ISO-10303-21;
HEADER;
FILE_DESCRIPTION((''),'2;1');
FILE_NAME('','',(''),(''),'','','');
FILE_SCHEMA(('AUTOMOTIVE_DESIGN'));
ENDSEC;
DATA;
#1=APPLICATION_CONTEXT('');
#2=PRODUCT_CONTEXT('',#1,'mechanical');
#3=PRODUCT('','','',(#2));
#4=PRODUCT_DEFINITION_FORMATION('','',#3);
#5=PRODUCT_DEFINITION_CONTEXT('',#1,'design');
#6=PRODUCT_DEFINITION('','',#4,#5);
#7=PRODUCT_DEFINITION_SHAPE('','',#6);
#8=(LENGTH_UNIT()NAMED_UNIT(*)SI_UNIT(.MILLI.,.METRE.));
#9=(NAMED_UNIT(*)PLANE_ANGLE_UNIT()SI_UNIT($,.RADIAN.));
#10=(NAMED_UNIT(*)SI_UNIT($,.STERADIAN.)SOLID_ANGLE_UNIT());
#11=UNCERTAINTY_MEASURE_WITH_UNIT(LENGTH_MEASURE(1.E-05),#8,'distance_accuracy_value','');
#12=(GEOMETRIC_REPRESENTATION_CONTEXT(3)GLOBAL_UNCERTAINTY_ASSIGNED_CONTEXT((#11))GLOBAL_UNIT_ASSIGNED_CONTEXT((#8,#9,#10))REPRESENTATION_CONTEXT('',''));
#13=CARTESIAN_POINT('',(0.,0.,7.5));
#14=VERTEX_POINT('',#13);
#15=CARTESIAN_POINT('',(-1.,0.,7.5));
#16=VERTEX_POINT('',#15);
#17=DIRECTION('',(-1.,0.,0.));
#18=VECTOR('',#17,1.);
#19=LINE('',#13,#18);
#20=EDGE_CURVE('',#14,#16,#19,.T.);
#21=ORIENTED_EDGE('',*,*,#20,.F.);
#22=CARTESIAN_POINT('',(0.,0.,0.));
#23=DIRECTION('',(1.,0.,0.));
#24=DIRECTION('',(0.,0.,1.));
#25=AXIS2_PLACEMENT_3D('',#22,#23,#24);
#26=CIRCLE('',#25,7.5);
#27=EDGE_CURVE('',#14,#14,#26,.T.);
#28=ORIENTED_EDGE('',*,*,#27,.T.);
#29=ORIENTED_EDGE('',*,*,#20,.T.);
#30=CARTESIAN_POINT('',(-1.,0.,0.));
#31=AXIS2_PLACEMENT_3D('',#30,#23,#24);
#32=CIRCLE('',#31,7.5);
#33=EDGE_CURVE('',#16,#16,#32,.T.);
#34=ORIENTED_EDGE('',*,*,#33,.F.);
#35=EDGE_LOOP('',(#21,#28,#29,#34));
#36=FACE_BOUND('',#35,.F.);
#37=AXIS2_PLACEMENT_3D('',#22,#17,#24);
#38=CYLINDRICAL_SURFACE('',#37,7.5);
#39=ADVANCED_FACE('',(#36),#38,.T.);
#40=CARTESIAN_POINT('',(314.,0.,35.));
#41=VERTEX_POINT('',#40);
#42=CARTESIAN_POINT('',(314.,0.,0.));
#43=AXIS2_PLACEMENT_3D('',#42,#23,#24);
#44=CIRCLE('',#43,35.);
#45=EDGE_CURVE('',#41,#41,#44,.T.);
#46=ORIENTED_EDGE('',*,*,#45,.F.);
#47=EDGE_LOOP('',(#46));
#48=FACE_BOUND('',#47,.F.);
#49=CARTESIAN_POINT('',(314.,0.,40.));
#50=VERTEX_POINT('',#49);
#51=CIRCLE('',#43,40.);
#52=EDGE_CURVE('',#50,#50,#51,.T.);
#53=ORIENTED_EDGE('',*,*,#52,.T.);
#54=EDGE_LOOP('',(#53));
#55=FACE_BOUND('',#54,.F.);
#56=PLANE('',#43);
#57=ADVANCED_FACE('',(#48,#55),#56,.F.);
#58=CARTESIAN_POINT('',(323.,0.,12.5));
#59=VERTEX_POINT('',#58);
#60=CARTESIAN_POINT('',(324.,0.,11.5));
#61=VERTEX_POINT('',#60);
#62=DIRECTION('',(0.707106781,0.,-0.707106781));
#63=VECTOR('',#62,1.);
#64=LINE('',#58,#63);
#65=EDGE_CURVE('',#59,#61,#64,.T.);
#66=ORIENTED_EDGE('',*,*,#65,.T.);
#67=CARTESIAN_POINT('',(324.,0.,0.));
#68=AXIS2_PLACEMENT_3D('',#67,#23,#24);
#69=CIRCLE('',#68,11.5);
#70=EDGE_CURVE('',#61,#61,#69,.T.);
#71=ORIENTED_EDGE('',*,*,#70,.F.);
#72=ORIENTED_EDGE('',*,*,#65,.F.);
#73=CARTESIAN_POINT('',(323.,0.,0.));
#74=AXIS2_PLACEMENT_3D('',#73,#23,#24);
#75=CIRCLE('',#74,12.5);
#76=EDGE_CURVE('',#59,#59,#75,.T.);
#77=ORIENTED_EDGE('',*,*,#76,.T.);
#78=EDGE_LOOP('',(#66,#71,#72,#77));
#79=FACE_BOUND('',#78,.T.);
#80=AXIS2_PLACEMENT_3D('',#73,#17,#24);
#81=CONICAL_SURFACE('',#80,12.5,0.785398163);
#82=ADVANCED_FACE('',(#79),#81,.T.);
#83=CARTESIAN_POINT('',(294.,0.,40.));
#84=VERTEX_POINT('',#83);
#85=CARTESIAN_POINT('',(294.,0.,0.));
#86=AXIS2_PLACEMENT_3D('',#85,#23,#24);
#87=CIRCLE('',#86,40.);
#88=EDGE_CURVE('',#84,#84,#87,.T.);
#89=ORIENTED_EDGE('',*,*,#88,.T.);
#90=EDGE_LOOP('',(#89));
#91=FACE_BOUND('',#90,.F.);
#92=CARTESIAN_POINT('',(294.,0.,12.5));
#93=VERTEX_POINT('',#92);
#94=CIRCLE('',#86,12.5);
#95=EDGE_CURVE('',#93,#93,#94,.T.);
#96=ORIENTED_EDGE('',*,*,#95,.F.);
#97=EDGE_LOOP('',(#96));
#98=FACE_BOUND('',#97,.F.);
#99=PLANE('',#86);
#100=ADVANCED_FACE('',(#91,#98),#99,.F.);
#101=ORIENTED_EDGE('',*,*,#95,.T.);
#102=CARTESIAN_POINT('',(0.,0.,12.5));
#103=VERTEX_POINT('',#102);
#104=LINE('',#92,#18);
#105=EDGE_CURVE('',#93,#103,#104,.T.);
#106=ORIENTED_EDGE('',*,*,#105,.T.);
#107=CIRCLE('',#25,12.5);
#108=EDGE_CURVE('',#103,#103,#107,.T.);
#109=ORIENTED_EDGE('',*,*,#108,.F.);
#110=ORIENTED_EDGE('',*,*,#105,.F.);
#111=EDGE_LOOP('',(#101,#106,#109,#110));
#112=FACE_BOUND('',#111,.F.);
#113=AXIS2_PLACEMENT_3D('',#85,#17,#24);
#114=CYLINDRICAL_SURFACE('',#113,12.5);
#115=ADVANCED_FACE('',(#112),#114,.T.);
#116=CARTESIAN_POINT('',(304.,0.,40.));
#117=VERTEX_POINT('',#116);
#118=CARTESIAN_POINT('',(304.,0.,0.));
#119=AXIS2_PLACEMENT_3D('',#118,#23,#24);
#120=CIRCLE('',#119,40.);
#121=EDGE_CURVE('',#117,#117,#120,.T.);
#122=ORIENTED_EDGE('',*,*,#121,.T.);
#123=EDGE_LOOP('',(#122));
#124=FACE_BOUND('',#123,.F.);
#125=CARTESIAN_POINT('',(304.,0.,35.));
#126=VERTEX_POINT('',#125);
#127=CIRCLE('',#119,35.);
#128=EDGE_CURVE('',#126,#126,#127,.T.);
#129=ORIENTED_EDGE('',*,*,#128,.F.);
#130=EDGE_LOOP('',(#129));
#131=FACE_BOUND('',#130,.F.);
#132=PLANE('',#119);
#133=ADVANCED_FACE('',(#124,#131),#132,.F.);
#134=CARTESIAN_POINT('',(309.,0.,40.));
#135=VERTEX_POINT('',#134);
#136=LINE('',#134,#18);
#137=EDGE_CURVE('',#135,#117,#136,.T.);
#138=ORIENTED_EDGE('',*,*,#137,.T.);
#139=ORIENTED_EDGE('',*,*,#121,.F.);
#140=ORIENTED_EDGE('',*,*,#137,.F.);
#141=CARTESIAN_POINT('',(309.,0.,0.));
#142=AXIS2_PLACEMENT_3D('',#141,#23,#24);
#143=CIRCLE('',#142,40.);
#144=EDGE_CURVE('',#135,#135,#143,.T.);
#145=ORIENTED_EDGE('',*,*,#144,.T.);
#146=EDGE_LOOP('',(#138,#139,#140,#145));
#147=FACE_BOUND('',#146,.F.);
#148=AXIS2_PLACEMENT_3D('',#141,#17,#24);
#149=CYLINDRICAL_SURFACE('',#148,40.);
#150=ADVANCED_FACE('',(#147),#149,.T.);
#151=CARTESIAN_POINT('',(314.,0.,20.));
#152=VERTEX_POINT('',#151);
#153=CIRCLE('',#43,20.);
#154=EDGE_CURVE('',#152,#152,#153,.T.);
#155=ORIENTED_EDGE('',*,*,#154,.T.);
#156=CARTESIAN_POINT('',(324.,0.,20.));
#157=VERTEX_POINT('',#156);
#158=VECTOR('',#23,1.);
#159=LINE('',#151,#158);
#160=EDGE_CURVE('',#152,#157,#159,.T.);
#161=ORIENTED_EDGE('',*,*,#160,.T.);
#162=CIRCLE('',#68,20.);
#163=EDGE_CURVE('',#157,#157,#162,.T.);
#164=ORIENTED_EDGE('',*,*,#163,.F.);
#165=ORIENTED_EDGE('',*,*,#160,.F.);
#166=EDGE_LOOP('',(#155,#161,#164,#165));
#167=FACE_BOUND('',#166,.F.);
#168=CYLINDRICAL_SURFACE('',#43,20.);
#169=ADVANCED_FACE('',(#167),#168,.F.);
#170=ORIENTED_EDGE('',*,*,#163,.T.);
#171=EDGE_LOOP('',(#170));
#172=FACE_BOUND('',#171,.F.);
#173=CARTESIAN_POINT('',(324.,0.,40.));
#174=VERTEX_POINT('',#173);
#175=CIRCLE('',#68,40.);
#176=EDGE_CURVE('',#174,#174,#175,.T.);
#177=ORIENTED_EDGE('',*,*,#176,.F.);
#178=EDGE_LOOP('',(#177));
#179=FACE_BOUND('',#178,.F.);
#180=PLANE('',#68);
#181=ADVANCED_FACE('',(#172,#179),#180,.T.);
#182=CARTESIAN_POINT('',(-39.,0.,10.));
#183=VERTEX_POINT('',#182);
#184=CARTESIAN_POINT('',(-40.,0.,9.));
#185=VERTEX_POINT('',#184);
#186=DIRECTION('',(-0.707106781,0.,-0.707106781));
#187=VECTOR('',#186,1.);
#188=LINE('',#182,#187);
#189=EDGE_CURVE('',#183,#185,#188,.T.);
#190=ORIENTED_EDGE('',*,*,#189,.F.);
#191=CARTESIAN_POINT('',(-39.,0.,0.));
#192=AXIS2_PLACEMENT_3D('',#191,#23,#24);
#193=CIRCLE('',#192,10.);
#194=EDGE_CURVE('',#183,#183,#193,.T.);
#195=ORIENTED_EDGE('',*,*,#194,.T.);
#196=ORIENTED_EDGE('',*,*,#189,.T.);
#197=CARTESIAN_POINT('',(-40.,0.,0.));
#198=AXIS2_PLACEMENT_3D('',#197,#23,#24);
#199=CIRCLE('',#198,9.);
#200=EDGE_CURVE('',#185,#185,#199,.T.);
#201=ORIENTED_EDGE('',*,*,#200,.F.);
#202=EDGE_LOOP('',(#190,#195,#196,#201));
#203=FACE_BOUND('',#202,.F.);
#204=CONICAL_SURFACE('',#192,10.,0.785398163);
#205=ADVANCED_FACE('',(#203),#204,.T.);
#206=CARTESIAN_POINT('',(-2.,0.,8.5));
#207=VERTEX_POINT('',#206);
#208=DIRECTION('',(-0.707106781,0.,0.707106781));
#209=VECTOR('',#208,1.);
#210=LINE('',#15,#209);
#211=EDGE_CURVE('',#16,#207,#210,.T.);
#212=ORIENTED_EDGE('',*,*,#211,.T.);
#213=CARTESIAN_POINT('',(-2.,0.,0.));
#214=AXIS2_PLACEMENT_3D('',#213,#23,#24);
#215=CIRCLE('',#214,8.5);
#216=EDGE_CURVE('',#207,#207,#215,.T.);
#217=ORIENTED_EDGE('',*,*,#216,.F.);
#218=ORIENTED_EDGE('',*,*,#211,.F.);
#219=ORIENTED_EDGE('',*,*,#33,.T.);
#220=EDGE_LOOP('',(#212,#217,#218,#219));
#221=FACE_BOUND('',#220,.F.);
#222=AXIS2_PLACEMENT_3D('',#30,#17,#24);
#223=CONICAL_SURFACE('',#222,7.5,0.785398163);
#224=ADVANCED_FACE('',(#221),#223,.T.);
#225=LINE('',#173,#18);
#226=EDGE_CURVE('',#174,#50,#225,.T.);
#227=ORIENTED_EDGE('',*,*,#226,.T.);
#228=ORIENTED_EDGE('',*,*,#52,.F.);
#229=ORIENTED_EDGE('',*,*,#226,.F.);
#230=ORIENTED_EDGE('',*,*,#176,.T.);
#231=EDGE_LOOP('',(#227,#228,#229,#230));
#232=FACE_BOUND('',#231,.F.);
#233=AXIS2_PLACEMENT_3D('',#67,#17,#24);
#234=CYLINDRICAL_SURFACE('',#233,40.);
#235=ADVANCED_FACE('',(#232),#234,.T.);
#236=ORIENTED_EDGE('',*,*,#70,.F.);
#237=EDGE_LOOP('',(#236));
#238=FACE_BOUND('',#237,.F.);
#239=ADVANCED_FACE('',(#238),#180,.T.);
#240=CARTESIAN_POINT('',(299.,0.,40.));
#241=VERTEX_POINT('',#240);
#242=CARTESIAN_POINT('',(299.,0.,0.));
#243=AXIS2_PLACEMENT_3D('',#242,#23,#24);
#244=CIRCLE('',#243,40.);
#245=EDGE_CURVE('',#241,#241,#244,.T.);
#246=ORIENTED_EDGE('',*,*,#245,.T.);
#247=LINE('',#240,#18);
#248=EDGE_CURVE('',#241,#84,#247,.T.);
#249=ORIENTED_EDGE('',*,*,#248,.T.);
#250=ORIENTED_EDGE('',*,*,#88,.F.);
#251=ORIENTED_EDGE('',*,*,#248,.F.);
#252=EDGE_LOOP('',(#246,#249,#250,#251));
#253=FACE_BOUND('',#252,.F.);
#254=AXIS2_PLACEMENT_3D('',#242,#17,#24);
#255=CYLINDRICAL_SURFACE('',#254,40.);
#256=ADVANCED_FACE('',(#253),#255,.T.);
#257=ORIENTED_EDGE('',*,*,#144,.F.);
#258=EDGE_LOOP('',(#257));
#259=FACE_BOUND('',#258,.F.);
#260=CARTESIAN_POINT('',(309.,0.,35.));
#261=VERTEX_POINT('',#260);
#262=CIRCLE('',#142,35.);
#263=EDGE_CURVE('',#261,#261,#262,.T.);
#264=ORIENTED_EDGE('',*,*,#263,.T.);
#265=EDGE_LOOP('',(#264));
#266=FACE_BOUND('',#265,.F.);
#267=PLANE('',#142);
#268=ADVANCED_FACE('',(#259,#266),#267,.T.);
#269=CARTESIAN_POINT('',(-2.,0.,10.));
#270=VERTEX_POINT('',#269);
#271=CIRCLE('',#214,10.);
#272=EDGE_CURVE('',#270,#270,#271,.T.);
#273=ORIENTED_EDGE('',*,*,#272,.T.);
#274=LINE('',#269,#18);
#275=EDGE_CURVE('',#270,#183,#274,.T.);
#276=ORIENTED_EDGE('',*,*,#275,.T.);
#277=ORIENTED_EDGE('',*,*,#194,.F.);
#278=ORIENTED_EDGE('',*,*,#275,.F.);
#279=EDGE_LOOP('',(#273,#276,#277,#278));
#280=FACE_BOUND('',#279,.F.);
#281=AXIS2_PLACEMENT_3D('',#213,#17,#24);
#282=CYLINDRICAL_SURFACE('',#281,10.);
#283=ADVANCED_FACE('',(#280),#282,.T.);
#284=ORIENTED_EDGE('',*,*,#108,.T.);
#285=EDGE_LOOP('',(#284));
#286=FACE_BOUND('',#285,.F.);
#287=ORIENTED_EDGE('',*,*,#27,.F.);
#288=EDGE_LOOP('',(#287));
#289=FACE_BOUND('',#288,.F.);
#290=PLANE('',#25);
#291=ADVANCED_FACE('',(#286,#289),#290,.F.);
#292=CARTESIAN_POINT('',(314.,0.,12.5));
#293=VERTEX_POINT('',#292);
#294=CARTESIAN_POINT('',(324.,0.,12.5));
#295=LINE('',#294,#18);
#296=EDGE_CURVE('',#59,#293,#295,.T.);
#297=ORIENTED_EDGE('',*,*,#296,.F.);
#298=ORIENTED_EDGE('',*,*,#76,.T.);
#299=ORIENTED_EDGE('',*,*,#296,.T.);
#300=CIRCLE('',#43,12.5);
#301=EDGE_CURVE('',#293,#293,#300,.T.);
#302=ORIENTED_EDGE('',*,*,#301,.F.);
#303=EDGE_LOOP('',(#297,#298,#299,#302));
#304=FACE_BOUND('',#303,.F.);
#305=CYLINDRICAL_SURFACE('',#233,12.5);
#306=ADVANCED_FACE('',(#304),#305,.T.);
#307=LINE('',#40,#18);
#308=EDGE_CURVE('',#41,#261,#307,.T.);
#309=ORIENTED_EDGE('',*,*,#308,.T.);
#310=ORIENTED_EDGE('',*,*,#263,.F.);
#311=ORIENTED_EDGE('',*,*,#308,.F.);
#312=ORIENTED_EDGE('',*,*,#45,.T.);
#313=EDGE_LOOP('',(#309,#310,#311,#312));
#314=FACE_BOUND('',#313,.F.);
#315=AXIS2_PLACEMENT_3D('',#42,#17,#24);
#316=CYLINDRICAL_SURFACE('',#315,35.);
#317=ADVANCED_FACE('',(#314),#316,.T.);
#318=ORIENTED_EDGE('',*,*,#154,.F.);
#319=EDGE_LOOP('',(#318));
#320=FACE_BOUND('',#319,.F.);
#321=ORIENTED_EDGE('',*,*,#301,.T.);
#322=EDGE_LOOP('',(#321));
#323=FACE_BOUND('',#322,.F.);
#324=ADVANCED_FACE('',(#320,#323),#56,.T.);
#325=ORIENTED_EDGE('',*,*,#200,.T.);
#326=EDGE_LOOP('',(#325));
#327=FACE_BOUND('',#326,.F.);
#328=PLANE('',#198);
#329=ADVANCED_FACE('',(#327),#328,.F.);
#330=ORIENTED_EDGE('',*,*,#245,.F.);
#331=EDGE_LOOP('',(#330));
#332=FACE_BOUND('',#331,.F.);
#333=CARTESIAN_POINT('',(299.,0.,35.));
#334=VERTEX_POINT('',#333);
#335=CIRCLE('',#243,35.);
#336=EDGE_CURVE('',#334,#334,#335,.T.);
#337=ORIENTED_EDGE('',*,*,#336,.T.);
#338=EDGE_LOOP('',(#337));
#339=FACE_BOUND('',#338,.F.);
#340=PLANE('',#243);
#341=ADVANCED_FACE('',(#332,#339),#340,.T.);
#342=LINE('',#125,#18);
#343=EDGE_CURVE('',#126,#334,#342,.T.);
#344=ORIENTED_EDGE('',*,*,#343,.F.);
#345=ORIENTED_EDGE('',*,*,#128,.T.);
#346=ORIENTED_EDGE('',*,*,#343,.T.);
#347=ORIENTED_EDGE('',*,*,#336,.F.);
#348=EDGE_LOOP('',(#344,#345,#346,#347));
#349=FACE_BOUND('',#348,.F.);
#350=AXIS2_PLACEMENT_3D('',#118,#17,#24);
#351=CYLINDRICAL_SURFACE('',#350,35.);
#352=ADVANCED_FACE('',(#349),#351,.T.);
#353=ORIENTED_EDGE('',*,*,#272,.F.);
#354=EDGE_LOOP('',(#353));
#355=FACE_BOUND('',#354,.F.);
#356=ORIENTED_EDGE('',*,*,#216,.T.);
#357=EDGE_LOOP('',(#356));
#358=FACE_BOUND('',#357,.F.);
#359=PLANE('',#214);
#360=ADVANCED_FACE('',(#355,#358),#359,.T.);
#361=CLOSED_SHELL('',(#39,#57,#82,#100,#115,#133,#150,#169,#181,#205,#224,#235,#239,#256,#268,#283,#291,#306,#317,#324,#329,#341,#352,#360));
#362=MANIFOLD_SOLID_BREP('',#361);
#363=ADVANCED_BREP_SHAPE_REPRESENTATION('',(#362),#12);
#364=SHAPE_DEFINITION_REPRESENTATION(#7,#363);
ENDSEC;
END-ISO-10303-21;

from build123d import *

# Parameters (mm, degrees)
F2_SIZE = 1
F3_SIZE = 1


# Not quite as in the source:
# - a feature names something its author has since deleted; it is built from what else it names


with BuildPart() as f1:
    # F0 (on Front) → F1 (revolve)
    with BuildSketch(Plane.XZ):
        Polygon((294, 12.5), (0, 12.5), (0, 7.5), (-2, 7.5), (-2, 10), (-40, 10), (-40, 0), (324, 0), (324, 12.5), (314, 12.5), (314, 20), (324, 20), (324, 40), (314, 40), (314, 35), (309, 35), (309, 40), (304, 40), (304, 35), (299, 35), (299, 40), (294, 40), align=None)
    revolve(axis=Axis((142, 0, 0), (1, 0, 0)))

    # F2
    f2_edges = [f1.edges().sort_by_distance(p)[0] for p in [
        (-2, 0, -7.5),
        (-40, 0, -10),
    ]]
    chamfer(f2_edges, length=F2_SIZE)

    # F3
    f3_edges = [f1.edges().sort_by_distance(p)[0] for p in [
        (324, 0, -12.5),
    ]]
    chamfer(f3_edges, length=F3_SIZE)


solid = f1.part
